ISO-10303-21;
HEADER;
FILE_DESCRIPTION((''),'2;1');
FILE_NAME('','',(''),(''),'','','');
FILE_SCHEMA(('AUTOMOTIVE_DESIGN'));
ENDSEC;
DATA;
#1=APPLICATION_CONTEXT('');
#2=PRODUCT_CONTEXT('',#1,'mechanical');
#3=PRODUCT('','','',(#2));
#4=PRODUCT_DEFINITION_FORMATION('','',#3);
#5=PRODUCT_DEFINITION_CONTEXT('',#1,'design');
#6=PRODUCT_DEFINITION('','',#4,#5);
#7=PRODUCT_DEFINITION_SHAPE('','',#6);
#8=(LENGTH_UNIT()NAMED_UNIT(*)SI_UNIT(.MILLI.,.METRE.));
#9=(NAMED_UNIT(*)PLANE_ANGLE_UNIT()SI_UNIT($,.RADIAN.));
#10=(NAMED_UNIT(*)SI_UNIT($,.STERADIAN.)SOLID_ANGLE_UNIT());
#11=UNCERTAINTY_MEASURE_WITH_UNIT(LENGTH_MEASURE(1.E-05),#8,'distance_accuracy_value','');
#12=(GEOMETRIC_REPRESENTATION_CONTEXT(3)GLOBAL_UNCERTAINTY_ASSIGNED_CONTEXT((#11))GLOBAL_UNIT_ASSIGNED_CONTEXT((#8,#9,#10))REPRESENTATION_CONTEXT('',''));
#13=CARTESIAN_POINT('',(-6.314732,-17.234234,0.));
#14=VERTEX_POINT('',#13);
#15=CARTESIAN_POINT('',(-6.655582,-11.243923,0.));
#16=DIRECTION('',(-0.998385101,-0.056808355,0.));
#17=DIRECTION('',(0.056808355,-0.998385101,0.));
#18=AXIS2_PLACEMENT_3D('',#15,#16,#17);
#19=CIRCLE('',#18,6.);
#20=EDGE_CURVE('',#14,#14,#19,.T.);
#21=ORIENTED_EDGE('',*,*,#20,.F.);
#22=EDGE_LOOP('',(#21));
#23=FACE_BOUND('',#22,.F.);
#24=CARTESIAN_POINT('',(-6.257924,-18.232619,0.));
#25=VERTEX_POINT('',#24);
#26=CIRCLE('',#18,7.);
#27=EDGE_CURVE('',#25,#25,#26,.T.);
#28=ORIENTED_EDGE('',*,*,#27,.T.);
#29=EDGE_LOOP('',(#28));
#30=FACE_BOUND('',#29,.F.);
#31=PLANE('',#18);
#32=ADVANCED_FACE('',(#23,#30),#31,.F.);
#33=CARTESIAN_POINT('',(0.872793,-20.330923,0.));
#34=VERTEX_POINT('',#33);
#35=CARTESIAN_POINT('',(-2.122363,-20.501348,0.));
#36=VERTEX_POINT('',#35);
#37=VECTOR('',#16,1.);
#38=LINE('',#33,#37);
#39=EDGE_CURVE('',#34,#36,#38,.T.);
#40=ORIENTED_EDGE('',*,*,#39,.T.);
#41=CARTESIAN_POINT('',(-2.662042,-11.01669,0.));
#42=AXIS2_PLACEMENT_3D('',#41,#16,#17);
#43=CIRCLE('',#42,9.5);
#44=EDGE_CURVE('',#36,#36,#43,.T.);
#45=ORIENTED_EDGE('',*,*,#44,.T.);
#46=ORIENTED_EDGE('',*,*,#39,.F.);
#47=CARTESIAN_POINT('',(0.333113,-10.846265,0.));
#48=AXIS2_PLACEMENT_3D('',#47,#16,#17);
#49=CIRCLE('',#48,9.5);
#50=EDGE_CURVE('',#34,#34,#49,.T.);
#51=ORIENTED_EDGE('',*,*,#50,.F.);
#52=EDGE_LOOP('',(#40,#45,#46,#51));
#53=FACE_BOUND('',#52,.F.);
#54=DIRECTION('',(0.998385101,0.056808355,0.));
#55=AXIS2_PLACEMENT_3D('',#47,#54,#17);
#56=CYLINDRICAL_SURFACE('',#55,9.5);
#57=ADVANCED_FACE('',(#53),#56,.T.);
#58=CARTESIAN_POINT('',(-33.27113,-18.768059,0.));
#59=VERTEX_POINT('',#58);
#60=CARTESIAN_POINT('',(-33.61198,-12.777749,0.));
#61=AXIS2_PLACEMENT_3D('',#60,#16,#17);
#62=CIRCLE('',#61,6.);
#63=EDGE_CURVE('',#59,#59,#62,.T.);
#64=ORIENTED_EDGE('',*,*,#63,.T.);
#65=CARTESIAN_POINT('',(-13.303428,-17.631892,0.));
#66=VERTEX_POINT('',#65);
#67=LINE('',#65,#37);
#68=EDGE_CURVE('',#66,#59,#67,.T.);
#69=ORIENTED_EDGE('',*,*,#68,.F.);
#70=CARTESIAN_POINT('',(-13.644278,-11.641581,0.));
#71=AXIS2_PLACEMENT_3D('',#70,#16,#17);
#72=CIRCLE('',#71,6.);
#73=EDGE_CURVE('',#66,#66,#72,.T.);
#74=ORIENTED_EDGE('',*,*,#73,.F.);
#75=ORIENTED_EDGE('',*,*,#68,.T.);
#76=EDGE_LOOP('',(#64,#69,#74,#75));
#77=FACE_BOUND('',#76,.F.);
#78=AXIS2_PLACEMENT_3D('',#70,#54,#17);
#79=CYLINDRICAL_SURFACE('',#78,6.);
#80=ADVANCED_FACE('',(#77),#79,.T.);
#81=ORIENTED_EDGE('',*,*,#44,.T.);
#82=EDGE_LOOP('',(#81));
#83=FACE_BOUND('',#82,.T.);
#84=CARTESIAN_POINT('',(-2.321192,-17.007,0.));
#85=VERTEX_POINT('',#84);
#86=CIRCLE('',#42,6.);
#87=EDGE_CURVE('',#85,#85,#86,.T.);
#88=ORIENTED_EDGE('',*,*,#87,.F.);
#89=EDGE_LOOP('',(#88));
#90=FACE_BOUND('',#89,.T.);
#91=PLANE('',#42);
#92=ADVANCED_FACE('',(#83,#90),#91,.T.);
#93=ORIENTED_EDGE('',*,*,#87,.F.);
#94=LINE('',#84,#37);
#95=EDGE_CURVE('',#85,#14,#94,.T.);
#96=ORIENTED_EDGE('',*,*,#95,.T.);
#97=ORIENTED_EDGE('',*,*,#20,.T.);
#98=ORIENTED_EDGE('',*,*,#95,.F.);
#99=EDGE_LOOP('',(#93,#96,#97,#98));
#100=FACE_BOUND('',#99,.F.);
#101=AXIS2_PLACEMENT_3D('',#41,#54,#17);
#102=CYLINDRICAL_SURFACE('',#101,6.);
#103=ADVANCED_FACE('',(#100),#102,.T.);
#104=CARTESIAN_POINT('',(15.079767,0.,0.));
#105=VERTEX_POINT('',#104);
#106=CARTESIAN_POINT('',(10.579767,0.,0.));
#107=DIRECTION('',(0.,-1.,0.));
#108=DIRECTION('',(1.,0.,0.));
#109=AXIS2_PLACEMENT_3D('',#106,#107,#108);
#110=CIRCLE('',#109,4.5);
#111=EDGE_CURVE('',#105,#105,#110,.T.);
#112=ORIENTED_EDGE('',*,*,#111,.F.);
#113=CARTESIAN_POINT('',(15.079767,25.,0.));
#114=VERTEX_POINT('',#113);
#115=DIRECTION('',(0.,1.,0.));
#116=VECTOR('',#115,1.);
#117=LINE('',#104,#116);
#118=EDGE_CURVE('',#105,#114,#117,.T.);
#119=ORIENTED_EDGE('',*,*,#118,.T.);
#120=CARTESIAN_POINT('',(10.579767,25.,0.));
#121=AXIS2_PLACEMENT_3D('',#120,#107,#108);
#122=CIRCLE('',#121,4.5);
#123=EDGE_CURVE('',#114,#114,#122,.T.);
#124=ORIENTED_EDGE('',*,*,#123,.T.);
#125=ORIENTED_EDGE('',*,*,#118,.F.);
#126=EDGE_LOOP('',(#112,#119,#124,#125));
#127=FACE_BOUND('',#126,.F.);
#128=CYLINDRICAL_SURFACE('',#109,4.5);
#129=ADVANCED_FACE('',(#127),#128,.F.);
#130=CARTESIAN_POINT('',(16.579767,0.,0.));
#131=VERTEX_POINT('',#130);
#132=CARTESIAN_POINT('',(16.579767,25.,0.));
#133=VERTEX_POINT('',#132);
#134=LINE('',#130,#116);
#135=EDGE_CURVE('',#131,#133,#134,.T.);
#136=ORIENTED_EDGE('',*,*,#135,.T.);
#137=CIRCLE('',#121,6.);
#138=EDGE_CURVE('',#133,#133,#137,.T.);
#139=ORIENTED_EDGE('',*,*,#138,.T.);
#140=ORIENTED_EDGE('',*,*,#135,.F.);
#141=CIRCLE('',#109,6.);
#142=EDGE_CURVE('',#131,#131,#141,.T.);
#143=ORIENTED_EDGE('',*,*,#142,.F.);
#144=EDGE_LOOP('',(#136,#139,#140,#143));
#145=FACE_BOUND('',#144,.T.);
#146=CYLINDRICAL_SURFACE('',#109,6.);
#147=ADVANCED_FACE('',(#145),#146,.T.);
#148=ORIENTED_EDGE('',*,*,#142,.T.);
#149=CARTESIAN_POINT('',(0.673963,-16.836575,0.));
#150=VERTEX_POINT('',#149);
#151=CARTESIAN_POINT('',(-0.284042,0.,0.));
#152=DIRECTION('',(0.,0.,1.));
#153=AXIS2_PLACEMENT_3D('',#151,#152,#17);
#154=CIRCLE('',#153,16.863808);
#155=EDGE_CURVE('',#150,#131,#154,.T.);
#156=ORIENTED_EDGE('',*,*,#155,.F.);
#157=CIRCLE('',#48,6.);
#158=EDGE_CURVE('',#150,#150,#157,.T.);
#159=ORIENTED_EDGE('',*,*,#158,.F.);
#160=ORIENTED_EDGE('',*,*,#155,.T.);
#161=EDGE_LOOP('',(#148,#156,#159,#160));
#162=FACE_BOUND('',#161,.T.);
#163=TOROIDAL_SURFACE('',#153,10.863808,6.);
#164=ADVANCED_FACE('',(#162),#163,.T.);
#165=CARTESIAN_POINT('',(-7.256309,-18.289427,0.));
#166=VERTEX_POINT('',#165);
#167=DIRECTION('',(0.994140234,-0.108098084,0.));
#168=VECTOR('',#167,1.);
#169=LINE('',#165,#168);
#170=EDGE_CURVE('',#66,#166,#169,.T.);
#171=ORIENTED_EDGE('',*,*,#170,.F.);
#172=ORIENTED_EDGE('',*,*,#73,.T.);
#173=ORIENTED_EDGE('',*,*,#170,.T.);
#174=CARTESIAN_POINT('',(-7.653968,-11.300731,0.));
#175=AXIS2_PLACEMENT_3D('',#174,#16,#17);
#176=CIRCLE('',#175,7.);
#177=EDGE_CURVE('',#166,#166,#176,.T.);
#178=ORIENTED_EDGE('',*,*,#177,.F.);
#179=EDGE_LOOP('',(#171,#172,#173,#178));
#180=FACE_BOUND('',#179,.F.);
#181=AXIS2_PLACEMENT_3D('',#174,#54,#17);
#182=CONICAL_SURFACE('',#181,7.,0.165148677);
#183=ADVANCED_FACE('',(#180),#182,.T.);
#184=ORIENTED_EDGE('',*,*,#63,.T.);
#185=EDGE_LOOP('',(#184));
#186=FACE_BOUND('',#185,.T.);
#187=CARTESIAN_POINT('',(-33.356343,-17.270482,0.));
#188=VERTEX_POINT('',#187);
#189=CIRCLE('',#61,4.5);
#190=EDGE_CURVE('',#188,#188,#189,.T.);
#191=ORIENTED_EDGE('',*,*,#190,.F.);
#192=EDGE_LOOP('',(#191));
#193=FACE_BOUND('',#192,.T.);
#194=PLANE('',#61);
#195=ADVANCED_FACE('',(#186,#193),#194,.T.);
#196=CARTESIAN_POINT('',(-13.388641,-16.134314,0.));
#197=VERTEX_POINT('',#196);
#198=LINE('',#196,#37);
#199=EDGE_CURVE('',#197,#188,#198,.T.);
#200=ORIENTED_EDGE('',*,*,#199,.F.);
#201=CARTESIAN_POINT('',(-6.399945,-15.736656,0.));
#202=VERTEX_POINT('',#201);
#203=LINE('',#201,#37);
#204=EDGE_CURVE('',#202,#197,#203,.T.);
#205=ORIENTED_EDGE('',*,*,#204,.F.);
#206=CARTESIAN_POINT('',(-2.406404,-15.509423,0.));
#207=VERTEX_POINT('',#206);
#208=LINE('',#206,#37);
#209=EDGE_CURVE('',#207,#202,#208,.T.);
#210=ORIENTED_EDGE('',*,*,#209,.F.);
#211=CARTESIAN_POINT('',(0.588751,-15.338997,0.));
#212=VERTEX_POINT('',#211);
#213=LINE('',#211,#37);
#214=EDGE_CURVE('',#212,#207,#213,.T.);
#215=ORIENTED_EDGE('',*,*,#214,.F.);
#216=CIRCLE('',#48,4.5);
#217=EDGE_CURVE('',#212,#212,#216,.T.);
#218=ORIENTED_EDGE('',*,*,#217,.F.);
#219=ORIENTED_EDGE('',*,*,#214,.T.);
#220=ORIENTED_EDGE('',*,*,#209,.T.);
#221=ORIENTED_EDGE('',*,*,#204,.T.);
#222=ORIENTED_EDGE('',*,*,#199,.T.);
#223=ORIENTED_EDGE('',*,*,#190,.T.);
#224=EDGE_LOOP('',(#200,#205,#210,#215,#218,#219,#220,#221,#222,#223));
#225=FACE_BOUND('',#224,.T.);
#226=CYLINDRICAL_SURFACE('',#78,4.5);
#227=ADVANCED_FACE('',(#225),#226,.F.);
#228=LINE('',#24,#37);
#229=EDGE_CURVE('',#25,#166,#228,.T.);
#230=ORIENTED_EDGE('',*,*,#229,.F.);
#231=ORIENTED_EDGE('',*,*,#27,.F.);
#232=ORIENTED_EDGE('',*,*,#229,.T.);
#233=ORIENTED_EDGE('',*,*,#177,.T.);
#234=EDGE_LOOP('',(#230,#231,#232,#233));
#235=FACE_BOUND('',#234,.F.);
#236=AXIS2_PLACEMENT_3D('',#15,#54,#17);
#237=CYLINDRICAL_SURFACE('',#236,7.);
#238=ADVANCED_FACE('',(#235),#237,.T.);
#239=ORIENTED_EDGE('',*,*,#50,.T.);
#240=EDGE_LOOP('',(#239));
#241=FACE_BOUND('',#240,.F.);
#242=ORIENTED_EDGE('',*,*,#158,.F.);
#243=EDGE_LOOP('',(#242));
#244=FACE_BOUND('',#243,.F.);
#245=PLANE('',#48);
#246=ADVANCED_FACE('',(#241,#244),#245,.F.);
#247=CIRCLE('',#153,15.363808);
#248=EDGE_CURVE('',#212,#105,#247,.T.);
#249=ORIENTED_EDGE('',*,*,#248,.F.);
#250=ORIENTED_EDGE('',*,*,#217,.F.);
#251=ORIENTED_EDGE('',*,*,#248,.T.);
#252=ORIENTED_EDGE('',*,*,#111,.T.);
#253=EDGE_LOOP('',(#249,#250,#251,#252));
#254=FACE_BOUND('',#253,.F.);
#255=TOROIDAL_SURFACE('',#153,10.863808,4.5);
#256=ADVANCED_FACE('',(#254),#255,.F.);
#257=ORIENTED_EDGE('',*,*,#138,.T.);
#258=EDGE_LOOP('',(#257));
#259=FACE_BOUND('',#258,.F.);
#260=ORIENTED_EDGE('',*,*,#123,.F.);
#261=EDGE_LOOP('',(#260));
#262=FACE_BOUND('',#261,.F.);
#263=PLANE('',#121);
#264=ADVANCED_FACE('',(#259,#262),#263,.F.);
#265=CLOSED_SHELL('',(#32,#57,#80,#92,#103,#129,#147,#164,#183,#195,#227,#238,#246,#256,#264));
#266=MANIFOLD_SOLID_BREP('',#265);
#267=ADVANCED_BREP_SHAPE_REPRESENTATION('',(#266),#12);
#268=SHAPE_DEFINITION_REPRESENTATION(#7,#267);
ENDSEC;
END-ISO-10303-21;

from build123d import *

# Parameters (mm, degrees)
F1_R        = 6
F1_R_2      = 4.5
F2_DEPTH    = 25
F2_FACE_R   = 6
F2_FACE_R_2 = 4.5
F4_R        = 9.5
F4_R_2      = 6
F4_R_3      = 4.5
F5_DEPTH    = 3
F6_R        = 6
F6_R_2      = 4.5
F7_DEPTH    = 4
F8_R        = 7
F8_R_2      = 6
F8_R_3      = 4.5
F9_DEPTH    = 7
F10_SIZE2   = 6
F10_SIZE    = 1
F11_R       = 6
F11_R_2     = 4.5
F12_DEPTH   = 20


with BuildPart() as f2:
    # F1 (on Front) → F2 (new body)
    with BuildSketch(Plane.XZ):
        with Locations((10.5797667056, 0)):
            Circle(F1_R)
        with Locations((10.5797667056, 0)):
            Circle(F1_R_2, mode=Mode.SUBTRACT)
    extrude(amount=-F2_DEPTH)

    # F3: sweep along a path in F0
    with BuildLine(Plane.XY) as f3_path:
        ThreePointArc((0, -4.9919255074), (3.3505289628, -3.4336417355), (4.7159582272, 0))
    # F2_face (on face) → F3 (sweep)
    with BuildSketch(Plane(origin=(10.5797667056, 0, 0), x_dir=(1, 0, 0), z_dir=(0, -1, 0))):
        Circle(F2_FACE_R)
        Circle(F2_FACE_R_2, mode=Mode.SUBTRACT)
    sweep(path=f3_path.line)

    # F4 (on face) → F5 (join)
    with BuildSketch(Plane(origin=(-0.2831251163, -0.0161098878, 0), x_dir=(0.0568083546, -0.9983851015, 0), z_dir=(-0.9983851015, -0.0568083546, 0))):
        with Locations((10.8476725327, 0)):
            Circle(F4_R)
        with Locations((10.8476725327, 0)):
            Circle(F4_R_2, mode=Mode.SUBTRACT)
        with Locations((10.8476725327, 0)):
            Circle(F4_R_2)
        with Locations((10.8476725327, 0)):
            Circle(F4_R_3, mode=Mode.SUBTRACT)
    extrude(amount=F5_DEPTH)

    # F6 (on face) → F7 (join)
    with BuildSketch(Plane(origin=(-3.2782804207, -0.1865349515, 0), x_dir=(0.0568083546, -0.9983851015, 0), z_dir=(-0.9983851015, -0.0568083546, 0))):
        with Locations((10.8476725327, 0)):
            Circle(F6_R)
        with Locations((10.8476725327, 0)):
            Circle(F6_R_2, mode=Mode.SUBTRACT)
    extrude(amount=F7_DEPTH)

    # F8 (on face) → F9 (join)
    with BuildSketch(Plane(origin=(-7.2718208266, -0.4137683698, 0), x_dir=(0.0568083546, -0.9983851015, 0), z_dir=(-0.9983851015, -0.0568083546, 0))):
        with Locations((10.8476725327, 0)):
            Circle(F8_R)
        with Locations((10.8476725327, 0)):
            Circle(F8_R_2, mode=Mode.SUBTRACT)
        with Locations((10.8476725327, 0)):
            Circle(F8_R_2)
        with Locations((10.8476725327, 0)):
            Circle(F8_R_3, mode=Mode.SUBTRACT)
    extrude(amount=F9_DEPTH)

    # F10
    f10_edges = [f2.edges().sort_by_distance(p)[0] for p in [
        (-14.041937, -4.652886, 0),
    ]]
    f10_side = f2.faces().sort_by_distance((-13.911163, -6.951178, 0))[0]
    chamfer(f10_edges, length=F10_SIZE, length2=F10_SIZE2, reference=f10_side)

    # F11 (on face) → F12 (join)
    with BuildSketch(Plane(origin=(-14.260516537, -0.8114268517, 0), x_dir=(0.0568083546, -0.9983851015, 0), z_dir=(-0.9983851015, -0.0568083546, 0))):
        with Locations((10.8476725327, 0)):
            Circle(F11_R)
        with Locations((10.8476725327, 0)):
            Circle(F11_R_2, mode=Mode.SUBTRACT)
    extrude(amount=F12_DEPTH)


solid = f2.part
